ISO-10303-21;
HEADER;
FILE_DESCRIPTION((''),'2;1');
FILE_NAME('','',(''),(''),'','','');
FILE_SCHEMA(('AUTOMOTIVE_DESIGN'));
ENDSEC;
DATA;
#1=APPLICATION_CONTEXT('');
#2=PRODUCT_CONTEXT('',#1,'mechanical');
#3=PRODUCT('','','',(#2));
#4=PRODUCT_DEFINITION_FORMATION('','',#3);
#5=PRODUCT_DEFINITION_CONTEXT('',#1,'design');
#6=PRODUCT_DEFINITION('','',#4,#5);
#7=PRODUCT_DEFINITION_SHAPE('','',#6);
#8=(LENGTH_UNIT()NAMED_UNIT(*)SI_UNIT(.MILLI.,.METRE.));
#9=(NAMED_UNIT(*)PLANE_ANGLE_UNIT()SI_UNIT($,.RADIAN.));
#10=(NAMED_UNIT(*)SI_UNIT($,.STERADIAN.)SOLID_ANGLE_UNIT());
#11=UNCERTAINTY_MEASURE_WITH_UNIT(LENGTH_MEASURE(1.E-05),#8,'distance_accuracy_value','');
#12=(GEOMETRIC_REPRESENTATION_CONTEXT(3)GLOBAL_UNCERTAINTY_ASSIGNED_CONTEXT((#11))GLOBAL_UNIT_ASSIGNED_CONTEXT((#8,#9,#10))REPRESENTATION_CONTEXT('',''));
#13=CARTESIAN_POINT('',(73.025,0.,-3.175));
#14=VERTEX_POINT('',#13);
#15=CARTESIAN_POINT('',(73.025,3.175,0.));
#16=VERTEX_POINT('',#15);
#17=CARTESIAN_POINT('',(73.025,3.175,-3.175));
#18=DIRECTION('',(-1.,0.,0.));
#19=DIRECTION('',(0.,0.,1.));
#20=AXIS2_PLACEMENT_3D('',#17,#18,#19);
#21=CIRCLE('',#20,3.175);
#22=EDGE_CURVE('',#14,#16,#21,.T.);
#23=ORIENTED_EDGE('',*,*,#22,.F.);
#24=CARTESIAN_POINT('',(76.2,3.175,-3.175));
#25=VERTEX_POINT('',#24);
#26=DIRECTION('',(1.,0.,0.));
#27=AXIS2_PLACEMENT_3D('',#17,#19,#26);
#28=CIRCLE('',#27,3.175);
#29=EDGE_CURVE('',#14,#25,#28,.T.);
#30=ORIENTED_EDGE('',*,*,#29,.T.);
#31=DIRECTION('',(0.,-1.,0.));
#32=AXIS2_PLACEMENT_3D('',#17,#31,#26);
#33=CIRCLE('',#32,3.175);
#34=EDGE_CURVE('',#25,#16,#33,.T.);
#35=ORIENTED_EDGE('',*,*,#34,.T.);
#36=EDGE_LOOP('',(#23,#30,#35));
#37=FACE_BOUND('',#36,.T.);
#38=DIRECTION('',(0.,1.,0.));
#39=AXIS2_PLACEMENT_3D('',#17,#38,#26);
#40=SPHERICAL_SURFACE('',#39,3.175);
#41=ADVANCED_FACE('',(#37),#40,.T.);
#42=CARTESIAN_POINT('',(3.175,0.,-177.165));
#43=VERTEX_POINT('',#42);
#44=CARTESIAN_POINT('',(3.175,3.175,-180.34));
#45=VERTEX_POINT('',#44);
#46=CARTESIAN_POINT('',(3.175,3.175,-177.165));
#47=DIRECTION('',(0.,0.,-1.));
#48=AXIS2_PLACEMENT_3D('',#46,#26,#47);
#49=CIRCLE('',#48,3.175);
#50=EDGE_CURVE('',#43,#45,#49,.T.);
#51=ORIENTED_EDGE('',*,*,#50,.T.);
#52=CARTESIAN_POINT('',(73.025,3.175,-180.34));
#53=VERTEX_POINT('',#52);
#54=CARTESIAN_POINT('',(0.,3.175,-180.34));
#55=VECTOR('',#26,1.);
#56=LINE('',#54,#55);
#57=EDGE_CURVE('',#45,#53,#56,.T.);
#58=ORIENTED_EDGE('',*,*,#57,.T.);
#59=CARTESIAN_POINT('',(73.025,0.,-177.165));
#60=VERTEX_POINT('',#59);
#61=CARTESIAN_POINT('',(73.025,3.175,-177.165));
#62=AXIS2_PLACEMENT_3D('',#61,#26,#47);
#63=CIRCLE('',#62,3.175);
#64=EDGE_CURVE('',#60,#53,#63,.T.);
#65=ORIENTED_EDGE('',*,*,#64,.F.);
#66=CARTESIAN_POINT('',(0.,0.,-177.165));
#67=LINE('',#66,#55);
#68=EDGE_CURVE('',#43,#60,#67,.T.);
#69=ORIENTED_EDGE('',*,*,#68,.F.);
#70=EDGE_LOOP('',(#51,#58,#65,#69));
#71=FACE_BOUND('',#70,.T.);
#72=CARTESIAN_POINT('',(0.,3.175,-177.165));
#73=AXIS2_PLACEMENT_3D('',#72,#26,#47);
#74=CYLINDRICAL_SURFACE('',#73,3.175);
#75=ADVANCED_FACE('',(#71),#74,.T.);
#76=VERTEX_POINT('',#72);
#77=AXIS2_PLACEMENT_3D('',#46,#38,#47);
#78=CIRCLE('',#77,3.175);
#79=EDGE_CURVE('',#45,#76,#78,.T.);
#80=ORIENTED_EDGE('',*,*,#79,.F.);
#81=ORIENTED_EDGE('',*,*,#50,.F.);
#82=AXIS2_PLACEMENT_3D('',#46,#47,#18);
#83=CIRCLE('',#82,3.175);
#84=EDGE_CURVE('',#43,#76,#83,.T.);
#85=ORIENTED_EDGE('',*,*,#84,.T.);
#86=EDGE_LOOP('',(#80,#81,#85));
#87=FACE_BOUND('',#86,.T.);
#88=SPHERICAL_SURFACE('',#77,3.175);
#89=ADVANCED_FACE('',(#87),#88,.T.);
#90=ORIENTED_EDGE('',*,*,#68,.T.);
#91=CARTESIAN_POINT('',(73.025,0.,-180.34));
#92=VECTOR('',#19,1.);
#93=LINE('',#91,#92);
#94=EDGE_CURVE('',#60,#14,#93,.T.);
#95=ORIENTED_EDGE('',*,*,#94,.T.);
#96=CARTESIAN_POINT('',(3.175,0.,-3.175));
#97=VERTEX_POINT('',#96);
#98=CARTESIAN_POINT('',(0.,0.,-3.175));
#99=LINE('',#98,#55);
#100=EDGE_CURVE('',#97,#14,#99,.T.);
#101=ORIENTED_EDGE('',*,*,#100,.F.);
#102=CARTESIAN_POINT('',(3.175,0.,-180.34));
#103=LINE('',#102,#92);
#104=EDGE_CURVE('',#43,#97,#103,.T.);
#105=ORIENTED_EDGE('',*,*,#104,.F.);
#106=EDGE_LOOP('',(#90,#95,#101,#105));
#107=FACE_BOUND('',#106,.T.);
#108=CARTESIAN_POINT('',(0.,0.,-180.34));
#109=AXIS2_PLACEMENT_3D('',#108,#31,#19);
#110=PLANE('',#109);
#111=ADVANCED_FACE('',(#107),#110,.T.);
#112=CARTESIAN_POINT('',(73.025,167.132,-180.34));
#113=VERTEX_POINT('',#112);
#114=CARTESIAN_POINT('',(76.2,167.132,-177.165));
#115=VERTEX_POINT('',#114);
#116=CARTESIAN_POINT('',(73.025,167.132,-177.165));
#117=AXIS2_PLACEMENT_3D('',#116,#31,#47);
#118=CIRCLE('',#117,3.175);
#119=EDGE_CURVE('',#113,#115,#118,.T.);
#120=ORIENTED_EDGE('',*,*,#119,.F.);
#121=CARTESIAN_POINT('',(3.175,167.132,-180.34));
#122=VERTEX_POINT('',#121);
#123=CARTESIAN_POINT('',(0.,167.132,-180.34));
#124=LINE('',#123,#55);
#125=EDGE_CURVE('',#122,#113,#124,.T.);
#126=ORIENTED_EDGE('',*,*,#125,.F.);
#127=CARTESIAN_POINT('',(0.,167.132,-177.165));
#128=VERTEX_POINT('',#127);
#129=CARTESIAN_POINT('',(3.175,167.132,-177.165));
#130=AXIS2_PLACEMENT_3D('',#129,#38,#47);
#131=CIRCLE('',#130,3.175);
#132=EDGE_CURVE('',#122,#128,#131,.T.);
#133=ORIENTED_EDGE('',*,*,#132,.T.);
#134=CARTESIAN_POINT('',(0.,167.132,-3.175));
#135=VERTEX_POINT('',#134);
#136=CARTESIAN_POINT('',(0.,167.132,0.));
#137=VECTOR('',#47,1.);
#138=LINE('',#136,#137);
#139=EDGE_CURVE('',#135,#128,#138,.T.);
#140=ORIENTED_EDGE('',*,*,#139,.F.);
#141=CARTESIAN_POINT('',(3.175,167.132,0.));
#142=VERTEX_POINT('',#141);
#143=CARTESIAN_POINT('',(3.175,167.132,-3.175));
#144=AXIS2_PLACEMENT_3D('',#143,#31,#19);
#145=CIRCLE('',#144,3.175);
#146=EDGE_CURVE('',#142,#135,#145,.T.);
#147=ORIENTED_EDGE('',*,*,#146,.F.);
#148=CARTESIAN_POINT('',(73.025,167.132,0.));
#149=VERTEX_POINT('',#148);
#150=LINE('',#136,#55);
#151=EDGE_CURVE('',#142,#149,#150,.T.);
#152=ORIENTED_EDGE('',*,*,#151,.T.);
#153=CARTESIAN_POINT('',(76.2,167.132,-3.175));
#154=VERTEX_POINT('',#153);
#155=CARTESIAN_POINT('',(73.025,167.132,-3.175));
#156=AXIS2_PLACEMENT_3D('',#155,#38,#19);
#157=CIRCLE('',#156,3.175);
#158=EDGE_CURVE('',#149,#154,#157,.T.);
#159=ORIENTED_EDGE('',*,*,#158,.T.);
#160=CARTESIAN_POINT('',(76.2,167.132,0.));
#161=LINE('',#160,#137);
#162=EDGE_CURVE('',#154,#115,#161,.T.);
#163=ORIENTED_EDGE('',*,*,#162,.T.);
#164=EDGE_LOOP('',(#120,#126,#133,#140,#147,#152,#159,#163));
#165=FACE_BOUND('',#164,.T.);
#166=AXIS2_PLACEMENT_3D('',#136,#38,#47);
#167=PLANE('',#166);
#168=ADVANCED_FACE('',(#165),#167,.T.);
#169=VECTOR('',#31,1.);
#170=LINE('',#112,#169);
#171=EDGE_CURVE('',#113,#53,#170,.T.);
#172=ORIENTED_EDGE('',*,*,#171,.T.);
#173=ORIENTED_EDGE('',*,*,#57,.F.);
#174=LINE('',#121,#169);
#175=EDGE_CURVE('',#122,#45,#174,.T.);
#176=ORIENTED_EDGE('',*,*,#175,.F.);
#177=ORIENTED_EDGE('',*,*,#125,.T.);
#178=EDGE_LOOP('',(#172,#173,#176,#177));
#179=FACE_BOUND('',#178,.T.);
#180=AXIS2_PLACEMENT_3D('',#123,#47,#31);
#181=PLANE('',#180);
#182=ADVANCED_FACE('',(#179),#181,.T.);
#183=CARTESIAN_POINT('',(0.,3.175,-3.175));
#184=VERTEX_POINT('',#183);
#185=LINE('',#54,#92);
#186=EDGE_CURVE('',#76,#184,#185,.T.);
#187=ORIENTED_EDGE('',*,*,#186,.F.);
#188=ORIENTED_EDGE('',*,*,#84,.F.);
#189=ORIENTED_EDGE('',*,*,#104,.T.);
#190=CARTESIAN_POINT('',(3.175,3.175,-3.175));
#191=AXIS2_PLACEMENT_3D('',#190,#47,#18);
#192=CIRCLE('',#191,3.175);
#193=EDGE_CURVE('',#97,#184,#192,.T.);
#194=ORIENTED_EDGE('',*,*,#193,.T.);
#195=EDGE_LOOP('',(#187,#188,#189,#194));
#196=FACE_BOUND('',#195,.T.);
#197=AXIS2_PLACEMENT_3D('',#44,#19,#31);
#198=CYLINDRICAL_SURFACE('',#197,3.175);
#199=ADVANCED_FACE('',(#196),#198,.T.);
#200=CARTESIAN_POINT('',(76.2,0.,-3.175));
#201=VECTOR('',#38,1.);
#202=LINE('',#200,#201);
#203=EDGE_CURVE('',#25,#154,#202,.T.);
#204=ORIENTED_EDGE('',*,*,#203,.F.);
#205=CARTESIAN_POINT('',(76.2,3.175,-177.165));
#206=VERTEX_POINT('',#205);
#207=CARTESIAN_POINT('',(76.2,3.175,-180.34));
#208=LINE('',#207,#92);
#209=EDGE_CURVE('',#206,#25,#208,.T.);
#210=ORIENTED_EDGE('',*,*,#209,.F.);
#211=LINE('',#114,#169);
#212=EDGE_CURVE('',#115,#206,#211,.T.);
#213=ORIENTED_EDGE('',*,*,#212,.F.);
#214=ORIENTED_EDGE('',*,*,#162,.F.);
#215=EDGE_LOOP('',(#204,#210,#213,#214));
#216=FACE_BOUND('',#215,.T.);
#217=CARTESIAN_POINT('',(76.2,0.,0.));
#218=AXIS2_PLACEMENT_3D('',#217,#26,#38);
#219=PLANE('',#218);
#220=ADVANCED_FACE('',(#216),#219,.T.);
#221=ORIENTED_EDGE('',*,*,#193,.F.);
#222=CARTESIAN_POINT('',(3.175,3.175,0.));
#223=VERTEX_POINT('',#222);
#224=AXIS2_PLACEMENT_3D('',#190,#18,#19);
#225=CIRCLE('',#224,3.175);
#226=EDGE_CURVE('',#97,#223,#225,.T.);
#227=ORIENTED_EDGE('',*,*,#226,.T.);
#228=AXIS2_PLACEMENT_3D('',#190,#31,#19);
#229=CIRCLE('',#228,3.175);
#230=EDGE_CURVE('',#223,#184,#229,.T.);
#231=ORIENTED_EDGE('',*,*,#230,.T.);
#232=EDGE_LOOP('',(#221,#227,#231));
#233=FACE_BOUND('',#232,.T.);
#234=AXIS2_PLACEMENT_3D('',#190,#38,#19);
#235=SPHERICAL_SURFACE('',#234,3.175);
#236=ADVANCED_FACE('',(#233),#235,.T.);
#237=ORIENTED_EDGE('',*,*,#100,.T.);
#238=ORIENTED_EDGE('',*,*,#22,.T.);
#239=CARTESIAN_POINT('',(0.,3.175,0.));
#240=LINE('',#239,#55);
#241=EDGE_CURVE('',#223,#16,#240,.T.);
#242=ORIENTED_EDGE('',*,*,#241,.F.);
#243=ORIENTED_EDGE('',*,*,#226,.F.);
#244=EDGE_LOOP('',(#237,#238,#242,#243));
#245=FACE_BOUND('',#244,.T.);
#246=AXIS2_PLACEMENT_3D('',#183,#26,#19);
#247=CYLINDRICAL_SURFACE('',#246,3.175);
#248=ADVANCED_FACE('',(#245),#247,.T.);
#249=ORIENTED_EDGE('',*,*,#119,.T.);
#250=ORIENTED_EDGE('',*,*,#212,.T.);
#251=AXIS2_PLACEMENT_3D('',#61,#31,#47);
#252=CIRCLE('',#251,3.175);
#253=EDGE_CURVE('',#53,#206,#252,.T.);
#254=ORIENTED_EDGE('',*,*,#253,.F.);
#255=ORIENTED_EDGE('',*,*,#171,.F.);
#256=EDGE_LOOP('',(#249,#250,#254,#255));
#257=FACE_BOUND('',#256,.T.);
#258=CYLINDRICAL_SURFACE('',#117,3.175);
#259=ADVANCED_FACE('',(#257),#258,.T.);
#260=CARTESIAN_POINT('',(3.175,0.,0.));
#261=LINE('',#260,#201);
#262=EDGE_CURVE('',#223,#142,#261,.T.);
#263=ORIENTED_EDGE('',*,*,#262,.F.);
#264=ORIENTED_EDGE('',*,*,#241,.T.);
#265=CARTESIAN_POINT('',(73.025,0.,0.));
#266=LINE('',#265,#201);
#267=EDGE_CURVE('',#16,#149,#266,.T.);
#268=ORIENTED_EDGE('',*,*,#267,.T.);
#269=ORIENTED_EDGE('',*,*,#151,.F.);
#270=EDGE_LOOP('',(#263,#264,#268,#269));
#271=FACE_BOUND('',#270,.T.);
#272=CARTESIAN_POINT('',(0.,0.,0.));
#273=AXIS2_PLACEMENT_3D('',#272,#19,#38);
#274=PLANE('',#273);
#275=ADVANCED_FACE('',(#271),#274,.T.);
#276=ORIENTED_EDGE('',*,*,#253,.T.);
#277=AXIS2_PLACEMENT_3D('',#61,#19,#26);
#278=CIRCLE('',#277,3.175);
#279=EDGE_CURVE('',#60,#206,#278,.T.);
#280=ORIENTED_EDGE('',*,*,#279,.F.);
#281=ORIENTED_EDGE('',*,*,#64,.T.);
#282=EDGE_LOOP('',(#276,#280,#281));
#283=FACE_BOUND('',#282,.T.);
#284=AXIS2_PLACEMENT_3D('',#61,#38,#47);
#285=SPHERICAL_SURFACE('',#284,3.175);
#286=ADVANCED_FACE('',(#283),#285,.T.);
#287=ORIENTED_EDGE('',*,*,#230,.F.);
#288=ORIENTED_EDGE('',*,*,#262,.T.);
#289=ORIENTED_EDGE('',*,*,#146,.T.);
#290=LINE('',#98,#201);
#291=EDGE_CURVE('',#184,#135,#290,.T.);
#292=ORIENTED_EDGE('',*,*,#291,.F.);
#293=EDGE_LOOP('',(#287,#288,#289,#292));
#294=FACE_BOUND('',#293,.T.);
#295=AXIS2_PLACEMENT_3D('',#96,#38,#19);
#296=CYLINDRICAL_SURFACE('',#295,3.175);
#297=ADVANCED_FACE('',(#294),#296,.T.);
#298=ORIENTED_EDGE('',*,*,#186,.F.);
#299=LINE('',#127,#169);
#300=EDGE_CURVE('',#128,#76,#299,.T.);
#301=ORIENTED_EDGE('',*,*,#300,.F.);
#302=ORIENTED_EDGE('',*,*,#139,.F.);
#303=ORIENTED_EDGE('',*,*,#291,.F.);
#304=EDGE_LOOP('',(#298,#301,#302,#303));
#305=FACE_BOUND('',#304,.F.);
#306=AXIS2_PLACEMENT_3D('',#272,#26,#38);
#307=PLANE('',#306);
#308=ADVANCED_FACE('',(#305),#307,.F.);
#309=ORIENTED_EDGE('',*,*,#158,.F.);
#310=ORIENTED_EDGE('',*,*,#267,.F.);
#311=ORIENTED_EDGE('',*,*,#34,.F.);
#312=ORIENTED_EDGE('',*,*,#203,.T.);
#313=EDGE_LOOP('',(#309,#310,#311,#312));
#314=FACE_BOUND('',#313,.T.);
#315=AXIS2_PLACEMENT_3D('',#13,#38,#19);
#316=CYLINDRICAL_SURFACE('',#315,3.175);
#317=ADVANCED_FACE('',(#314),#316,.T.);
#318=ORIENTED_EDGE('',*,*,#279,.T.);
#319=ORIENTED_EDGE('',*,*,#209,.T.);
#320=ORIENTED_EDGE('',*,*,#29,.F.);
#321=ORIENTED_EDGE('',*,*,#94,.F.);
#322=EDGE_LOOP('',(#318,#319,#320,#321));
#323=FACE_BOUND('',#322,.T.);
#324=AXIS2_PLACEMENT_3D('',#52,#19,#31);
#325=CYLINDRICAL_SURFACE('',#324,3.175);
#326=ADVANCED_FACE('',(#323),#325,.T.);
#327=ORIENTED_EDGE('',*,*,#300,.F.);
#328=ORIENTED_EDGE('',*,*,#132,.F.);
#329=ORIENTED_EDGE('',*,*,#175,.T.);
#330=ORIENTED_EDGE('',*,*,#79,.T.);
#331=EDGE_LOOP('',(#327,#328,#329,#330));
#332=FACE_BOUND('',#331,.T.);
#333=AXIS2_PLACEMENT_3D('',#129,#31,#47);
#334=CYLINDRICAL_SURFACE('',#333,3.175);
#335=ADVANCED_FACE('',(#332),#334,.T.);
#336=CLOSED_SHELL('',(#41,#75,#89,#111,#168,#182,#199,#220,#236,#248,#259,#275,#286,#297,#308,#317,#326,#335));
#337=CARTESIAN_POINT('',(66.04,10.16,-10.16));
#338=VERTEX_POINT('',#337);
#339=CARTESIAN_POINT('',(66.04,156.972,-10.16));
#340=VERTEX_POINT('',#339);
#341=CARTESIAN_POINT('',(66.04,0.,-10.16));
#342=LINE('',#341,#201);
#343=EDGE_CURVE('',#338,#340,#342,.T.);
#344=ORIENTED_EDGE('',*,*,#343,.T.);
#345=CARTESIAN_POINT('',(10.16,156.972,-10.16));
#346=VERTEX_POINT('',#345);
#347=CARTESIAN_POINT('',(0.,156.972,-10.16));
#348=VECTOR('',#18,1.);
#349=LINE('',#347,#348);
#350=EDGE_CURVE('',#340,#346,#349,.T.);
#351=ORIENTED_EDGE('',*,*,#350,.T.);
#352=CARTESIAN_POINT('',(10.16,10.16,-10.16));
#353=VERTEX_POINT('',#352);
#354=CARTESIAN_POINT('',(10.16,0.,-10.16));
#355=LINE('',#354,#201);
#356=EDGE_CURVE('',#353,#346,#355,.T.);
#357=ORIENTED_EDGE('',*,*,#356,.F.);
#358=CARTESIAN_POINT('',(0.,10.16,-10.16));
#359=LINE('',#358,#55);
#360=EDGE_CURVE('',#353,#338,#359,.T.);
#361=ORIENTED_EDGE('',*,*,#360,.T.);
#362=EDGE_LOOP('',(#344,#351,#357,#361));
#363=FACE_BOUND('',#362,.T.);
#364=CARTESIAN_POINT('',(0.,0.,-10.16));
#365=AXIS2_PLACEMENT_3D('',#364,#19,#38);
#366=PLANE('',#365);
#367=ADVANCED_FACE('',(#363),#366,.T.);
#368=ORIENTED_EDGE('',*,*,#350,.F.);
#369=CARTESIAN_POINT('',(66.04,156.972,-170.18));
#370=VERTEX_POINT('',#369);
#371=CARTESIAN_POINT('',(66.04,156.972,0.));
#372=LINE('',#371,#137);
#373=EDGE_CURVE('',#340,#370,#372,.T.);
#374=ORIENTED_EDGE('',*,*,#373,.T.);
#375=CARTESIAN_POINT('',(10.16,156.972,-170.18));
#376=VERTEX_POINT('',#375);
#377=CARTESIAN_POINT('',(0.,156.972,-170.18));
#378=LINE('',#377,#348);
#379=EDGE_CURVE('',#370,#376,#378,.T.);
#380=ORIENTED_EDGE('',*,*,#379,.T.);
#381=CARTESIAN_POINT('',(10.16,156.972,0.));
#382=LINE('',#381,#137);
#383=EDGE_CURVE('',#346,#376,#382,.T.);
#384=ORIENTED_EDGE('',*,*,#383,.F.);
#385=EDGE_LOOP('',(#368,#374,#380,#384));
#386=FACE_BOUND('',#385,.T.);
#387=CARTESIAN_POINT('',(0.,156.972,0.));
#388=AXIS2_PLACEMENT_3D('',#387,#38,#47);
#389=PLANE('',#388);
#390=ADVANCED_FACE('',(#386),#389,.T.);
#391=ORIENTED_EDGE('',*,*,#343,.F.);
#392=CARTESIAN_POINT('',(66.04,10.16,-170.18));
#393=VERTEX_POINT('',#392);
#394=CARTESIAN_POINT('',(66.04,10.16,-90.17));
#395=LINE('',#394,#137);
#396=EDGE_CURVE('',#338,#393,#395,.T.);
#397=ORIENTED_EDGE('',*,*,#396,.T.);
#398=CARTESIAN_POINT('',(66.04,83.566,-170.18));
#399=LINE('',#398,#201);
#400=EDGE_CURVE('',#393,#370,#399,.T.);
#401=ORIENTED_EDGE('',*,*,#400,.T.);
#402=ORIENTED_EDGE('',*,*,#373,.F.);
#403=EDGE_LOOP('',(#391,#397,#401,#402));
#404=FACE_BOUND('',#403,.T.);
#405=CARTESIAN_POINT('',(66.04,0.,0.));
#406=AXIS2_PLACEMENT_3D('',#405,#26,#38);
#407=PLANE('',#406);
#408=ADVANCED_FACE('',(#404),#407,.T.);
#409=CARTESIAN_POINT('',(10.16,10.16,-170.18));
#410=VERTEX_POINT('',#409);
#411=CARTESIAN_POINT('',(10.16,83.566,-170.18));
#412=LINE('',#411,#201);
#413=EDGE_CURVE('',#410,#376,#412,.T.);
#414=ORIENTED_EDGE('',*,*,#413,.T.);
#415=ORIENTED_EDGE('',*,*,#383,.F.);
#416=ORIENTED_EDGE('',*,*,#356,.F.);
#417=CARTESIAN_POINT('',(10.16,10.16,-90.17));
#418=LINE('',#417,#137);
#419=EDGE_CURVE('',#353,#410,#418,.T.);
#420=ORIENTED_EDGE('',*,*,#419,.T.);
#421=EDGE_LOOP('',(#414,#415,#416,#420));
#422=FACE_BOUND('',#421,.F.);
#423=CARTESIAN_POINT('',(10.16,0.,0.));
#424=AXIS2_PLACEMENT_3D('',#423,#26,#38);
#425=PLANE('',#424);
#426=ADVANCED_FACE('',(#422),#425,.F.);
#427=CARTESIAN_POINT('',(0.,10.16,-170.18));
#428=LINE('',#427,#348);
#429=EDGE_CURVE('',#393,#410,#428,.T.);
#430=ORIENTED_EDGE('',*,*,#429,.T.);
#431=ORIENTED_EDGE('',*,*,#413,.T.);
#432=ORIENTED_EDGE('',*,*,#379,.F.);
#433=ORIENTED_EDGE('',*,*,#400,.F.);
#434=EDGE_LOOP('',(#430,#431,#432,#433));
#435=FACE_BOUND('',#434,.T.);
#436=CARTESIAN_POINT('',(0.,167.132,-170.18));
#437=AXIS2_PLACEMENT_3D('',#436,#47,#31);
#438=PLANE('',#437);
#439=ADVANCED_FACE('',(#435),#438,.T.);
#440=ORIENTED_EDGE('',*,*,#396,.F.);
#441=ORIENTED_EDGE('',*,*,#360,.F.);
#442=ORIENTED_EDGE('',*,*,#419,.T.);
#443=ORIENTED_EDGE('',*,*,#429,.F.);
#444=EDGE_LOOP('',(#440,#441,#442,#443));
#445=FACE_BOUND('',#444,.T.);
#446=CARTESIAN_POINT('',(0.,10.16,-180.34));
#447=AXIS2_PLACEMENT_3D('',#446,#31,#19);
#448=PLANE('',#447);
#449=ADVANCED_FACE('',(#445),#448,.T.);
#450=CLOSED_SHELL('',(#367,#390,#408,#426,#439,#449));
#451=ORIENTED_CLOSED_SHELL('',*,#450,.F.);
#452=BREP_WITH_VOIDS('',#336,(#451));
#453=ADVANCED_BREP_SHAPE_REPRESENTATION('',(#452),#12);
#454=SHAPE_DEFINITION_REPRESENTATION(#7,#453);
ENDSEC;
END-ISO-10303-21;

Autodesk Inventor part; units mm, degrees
ref_plane "YZ Plane" through (0, 0, 0) normal (1, 0, 0) x (0, 1, 0)
ref_plane "XZ Plane" through (0, 0, 0) normal (0, 1, 0) x (-1, 0, 0)
ref_plane "XY Plane" through (0, 0, 0) normal (0, 0, 1) x (1, 0, 0)
sketch "Sketch1" plane through (0, 0, 0) normal (1, 0, 0) x (0, 1, 0)
  line L0 (0, 0) -> (167.132, 0)
  line L1 (167.132, 0) -> (167.132, -180.34)
  line L2 (167.132, -180.34) -> (0, -180.34)
  line L3 (0, -180.34) -> (0, 0)
  dimension "d0" = 167.132
  dimension "d1" = 180.34
extrude "Extrusion1" add sketch "Sketch1" along normal blind 76.2
fillet "Fillet1" radius 3.175 8 edges at (76.2, 83.566, 0) (0, 83.566, 0) (76.2, 83.566, -180.34) (0, 83.566, -180.34) (38.1, 0, -180.34) (76.2, 0, -90.17) (38.1, 0, 0) (0, 0, -90.17)
shell "Shell1" thickness 10.16 removed faces 0
properties part number "Battery" material "Concrete"
